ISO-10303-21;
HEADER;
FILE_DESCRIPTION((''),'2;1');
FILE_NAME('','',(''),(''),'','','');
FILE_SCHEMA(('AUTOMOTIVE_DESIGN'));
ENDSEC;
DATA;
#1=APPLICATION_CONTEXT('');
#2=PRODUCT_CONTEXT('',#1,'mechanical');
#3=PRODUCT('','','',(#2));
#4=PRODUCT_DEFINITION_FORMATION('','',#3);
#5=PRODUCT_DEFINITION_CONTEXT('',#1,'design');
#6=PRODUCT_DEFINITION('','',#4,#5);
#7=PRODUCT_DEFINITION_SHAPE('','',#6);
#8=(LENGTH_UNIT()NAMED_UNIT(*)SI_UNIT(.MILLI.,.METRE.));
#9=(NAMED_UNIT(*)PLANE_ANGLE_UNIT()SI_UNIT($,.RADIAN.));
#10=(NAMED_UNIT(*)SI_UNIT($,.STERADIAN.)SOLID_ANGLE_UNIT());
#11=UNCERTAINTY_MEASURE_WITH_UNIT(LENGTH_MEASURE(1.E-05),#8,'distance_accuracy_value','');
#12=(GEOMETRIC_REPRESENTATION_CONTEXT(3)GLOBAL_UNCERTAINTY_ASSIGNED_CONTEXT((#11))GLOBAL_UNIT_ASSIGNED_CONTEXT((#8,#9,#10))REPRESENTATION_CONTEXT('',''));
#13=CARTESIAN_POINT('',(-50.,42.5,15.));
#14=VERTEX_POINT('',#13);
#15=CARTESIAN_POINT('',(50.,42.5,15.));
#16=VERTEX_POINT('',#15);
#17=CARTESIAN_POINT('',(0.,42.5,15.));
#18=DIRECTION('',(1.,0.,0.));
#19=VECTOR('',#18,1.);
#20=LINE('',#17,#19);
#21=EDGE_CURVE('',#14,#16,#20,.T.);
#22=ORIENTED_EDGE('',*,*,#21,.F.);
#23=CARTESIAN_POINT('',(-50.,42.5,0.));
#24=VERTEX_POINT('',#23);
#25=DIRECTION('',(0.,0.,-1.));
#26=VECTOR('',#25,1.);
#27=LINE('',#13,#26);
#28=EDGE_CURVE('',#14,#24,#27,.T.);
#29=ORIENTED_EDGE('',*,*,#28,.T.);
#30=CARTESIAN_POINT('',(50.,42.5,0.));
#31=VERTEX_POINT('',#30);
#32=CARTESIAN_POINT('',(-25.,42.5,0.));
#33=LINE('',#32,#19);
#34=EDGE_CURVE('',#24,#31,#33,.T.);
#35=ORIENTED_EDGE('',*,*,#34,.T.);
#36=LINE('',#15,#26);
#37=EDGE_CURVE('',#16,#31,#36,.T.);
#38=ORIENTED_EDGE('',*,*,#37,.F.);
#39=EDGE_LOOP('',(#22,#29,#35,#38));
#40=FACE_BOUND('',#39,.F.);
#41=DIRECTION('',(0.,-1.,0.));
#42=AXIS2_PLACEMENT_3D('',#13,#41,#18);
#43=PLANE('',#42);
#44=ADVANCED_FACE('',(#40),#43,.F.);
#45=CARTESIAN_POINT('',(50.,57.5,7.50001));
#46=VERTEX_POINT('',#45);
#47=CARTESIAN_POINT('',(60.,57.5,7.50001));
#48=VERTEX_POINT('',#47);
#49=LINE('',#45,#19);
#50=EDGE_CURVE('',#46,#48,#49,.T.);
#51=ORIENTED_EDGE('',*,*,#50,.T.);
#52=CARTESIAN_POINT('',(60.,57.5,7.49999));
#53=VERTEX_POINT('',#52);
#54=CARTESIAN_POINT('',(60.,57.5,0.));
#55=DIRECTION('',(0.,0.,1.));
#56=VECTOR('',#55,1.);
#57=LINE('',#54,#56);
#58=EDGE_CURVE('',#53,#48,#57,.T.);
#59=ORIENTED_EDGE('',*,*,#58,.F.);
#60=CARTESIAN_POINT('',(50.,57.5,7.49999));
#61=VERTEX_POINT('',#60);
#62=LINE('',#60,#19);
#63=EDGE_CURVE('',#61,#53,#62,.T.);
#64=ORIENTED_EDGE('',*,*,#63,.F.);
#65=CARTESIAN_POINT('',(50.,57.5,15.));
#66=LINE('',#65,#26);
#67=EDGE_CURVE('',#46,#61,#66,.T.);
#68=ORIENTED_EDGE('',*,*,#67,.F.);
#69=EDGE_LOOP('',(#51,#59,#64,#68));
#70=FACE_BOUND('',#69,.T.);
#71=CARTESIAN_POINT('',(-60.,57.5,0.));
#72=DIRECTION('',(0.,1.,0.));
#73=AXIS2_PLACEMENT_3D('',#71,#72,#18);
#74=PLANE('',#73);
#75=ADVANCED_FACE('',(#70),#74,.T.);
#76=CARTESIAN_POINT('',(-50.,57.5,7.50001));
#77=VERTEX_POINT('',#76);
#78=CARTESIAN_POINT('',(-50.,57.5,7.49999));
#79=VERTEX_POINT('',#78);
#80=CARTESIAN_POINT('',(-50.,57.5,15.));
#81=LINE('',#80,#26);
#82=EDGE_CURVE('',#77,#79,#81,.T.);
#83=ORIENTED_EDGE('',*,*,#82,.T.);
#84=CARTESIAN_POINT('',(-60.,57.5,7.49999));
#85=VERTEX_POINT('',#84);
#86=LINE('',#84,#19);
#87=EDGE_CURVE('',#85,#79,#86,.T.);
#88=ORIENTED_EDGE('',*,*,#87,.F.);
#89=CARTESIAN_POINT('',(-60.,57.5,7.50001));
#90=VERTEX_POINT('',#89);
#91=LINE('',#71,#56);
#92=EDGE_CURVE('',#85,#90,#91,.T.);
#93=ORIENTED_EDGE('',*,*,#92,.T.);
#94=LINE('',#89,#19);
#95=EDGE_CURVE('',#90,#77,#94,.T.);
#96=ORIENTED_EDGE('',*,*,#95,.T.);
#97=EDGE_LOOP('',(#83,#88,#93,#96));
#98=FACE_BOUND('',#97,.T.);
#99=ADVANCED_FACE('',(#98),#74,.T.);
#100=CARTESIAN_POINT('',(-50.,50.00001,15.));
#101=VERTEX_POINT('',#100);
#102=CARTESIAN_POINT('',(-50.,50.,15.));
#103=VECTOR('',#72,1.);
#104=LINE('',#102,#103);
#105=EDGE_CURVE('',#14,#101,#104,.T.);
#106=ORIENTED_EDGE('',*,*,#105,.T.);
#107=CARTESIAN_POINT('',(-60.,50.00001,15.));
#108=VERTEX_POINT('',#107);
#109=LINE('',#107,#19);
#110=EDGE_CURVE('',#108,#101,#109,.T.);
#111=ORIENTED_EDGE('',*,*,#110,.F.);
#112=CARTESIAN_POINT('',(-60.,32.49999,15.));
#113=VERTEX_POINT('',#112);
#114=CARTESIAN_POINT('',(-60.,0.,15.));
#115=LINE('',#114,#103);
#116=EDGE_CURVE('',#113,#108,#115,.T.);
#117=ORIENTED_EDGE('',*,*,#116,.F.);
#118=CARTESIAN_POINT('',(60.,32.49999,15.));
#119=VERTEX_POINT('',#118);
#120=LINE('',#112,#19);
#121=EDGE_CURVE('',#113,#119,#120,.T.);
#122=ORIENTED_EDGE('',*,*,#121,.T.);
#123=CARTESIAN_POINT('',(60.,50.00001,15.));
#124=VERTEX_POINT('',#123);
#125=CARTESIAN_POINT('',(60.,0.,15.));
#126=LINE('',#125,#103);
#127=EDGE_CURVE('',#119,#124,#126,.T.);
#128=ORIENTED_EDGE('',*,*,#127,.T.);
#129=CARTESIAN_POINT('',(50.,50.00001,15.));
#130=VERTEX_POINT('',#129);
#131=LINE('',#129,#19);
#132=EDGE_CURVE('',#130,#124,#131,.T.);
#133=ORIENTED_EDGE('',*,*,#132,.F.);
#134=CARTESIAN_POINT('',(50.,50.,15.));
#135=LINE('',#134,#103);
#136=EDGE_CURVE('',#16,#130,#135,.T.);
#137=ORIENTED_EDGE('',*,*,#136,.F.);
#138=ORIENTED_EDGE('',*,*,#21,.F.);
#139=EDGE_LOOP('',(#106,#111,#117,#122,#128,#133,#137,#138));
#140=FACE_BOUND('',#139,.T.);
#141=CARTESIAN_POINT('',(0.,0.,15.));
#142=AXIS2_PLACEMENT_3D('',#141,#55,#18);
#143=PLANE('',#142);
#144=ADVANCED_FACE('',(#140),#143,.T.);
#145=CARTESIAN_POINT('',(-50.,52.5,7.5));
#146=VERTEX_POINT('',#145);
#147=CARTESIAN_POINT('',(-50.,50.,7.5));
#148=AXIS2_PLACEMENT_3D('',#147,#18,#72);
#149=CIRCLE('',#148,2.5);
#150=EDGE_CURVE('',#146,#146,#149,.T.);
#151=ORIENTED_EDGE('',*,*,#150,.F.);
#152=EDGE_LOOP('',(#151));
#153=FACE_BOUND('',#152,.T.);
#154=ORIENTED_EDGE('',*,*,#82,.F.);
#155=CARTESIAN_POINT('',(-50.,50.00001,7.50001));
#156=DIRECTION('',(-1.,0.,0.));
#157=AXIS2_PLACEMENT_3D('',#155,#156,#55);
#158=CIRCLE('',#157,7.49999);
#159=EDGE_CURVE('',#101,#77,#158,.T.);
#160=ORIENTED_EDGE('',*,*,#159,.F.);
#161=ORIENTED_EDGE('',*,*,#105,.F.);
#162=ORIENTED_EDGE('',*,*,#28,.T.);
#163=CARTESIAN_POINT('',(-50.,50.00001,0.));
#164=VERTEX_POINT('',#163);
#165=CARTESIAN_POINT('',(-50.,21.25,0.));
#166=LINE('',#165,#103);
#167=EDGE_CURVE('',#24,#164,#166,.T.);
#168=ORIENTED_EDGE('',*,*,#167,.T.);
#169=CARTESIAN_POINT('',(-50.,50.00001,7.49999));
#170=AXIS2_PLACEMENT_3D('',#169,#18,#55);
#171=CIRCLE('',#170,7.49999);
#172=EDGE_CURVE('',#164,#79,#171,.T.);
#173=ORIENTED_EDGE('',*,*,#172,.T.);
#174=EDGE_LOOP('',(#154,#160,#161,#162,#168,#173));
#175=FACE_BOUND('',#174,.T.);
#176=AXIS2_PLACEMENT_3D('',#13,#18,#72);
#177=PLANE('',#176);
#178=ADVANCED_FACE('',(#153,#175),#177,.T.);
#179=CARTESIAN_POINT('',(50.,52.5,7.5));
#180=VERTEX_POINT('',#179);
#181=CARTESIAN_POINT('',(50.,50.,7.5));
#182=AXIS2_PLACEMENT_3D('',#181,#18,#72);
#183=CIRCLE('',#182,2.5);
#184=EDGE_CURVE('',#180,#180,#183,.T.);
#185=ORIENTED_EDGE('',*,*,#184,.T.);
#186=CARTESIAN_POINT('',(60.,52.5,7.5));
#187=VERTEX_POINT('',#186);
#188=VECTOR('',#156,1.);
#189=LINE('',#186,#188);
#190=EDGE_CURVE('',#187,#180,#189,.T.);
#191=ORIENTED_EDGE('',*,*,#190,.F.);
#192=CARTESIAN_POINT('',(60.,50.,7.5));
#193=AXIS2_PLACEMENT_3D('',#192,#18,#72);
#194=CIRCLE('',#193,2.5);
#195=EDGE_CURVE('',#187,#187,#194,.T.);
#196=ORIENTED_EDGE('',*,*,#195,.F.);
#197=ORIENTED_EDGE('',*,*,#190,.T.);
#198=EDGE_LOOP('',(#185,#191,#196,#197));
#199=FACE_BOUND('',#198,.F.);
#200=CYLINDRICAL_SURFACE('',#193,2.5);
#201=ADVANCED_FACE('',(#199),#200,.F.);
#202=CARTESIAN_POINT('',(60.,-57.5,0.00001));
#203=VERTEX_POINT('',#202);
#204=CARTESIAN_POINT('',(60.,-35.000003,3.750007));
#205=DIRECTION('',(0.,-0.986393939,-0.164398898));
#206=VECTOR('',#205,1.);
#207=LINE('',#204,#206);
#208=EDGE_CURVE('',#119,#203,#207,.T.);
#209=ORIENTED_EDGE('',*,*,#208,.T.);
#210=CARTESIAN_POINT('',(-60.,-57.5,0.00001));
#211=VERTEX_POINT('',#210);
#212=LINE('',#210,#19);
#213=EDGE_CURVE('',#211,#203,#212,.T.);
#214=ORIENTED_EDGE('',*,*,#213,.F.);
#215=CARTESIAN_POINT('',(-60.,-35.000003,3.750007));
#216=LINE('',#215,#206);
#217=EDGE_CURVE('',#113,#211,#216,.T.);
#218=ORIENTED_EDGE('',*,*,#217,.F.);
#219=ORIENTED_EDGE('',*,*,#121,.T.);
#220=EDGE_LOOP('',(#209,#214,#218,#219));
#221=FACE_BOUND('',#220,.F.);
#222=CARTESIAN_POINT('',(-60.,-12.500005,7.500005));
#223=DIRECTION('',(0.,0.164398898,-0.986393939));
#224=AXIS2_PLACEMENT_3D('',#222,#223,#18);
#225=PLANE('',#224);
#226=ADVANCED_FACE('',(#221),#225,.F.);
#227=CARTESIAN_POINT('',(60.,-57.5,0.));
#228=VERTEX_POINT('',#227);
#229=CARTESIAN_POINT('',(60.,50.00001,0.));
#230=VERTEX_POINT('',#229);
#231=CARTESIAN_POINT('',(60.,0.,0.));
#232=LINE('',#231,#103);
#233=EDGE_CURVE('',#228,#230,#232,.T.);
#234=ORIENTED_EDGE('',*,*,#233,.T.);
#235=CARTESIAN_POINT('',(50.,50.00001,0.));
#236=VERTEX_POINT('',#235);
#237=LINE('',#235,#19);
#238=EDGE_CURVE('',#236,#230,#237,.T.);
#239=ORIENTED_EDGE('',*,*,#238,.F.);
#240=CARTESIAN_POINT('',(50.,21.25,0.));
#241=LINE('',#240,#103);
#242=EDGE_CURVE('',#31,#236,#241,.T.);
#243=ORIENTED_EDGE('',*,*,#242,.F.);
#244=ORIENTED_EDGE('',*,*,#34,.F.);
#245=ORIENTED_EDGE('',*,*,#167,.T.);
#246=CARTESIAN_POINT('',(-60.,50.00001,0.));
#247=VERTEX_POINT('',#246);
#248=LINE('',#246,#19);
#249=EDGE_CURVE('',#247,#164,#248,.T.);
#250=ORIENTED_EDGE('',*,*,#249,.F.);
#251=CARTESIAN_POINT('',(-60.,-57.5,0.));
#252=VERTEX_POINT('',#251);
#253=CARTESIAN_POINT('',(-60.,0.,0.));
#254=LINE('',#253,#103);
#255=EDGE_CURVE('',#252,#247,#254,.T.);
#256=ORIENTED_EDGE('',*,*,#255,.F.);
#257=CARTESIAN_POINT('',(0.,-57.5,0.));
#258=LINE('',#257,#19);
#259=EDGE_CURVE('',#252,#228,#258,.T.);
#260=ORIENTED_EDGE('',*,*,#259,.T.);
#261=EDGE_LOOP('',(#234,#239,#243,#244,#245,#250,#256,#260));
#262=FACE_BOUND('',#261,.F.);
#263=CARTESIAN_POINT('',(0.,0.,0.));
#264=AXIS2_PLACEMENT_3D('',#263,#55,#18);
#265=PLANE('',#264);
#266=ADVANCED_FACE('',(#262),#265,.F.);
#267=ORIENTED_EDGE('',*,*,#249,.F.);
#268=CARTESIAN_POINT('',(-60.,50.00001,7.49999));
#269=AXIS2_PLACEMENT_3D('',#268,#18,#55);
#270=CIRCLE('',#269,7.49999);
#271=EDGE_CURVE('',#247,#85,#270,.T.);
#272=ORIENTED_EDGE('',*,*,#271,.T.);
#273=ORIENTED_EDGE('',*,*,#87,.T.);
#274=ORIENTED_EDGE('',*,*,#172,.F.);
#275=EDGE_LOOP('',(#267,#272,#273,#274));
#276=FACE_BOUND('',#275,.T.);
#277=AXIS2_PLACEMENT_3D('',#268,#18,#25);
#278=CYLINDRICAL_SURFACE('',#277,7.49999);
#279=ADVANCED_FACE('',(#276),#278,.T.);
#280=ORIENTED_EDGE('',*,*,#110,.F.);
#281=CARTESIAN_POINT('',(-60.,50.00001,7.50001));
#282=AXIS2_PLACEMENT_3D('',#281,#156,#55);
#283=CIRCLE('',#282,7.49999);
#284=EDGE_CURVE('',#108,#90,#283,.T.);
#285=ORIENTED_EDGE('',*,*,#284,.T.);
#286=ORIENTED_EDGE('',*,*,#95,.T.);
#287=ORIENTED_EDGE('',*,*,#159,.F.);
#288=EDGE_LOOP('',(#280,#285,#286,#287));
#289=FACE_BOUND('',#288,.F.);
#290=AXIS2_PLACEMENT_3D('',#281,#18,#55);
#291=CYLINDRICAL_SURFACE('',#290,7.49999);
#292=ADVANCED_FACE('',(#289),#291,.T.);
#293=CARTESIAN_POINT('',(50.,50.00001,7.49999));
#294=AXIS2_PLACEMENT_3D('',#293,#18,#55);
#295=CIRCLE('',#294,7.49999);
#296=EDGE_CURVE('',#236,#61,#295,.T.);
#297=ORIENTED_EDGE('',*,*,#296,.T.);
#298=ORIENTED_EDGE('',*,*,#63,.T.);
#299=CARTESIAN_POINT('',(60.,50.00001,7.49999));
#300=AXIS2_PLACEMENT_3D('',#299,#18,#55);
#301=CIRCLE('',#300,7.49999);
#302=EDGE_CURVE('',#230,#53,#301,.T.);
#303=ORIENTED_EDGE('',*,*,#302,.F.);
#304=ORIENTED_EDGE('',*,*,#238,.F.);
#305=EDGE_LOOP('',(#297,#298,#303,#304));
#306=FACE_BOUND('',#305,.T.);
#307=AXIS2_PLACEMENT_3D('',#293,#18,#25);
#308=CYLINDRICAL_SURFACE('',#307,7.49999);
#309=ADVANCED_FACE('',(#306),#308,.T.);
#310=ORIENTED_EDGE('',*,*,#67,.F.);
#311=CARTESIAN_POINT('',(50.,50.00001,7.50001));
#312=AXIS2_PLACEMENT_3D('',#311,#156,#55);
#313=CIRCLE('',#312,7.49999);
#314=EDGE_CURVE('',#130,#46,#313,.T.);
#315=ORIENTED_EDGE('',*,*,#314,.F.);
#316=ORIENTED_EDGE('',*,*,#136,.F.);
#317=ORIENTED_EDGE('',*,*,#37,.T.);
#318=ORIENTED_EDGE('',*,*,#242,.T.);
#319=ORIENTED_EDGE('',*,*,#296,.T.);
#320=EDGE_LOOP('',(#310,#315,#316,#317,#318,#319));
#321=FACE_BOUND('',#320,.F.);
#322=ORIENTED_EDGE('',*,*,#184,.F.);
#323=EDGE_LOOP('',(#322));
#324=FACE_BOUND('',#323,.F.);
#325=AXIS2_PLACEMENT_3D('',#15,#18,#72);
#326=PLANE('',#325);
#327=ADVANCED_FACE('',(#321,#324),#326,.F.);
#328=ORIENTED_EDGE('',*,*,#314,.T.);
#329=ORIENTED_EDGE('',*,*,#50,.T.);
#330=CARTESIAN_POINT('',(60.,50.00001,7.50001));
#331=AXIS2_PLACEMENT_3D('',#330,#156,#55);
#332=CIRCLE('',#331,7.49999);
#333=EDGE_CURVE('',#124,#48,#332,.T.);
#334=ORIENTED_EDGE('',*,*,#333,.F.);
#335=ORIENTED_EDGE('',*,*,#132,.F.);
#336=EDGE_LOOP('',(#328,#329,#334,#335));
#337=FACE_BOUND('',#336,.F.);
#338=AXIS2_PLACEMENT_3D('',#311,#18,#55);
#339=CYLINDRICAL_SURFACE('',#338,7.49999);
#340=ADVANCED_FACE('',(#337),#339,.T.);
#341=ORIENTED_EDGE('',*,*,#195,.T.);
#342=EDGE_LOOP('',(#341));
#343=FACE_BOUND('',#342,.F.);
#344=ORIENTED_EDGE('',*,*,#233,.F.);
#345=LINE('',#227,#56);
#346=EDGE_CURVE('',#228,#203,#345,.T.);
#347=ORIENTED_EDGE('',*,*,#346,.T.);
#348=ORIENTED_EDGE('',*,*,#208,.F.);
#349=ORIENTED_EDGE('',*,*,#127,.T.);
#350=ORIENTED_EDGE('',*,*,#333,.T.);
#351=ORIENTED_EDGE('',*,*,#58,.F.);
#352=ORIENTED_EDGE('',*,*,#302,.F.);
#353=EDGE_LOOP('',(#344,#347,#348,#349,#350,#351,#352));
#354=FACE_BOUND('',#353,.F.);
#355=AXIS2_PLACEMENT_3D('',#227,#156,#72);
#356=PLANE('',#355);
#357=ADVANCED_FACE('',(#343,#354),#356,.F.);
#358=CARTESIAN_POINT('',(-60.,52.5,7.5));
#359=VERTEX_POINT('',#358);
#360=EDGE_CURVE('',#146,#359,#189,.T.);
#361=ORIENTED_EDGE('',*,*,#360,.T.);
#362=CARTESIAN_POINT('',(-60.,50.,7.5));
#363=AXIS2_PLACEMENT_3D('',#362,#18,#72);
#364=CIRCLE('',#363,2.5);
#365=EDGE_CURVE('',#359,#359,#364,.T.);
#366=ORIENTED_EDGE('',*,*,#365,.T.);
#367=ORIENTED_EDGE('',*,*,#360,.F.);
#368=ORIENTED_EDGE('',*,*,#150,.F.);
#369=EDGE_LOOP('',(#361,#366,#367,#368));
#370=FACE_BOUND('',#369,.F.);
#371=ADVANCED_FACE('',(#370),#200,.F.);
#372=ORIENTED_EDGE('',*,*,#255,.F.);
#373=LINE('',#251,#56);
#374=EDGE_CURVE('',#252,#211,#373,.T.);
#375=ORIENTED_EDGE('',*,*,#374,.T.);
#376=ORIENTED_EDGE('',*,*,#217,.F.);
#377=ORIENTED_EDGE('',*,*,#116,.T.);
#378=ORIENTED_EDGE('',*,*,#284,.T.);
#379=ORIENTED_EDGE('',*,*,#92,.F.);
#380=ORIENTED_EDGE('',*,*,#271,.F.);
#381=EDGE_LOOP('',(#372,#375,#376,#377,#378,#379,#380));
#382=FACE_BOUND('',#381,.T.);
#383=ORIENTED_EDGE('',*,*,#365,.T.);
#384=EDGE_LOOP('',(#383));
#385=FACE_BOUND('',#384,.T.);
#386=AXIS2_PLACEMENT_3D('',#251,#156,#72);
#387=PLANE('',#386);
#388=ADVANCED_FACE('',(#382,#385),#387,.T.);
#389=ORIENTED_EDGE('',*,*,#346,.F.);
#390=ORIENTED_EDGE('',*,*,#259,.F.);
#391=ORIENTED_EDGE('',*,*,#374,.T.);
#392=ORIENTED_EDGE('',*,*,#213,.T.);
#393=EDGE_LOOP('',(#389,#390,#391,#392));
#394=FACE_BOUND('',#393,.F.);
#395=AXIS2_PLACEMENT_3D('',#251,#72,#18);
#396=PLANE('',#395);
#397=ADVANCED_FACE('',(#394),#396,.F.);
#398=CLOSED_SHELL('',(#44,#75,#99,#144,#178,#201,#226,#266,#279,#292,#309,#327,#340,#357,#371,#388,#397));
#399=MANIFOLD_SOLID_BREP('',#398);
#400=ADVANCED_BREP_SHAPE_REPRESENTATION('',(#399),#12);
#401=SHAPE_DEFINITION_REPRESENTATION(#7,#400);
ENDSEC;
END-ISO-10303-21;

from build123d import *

# Parameters (mm, degrees)
F0_W     = 120
F0_H     = 115
F1_DEPTH = 15
F2_W     = 100
F2_H     = 15
F3_DEPTH = 15.001
F4_R     = 2.5
F5_DEPTH = 120.001
F6_SIZE2 = 14.99999
F6_SIZE  = 89.99999
F7_R     = 7.49999


# Not quite as in the source:
# - a fillet or chamfer is up to 0.001 mm smaller than in the source, because OpenCascade refuses the exact size


with BuildPart() as f1:
    # F0 (on Top) → F1 (new body)
    with BuildSketch(Plane.XY):
        Rectangle(F0_W, F0_H)
    extrude(amount=F1_DEPTH)

    # F2 (on face) → F3 (cut, through all)
    with BuildSketch(Plane.XY.offset(15)):
        with Locations((0, 50)):
            Rectangle(F2_W, F2_H)
    extrude(amount=-F3_DEPTH, mode=Mode.SUBTRACT)

    # F4 (on face) → F5 (cut, through all)
    with BuildSketch(Plane.YZ.offset(60)):
        with Locations((50, 7.5)):
            Circle(F4_R)
    extrude(amount=-F5_DEPTH, mode=Mode.SUBTRACT)

    # F6 (size 90 and 15 in the source; OpenCascade refuses exactly that, so slightly less here)
    f6_edges = [f1.edges().sort_by_distance(p)[0] for p in [
        (0, -57.5, 15),
    ]]
    f6_side = f1.faces().sort_by_distance((0, -6.097561, 15))[0]
    chamfer(f6_edges, length=F6_SIZE, length2=F6_SIZE2, reference=f6_side)

    # F7 (radius 7.5 in the source; OpenCascade refuses exactly that, so slightly less here)
    f7_edges = [f1.edges().sort_by_distance(p)[0] for p in [
        (55, 57.5, 15),
        (55, 57.5, 0),
        (-55, 57.5, 0),
        (-55, 57.5, 15),
    ]]
    fillet(f7_edges, radius=F7_R)


solid = f1.part
